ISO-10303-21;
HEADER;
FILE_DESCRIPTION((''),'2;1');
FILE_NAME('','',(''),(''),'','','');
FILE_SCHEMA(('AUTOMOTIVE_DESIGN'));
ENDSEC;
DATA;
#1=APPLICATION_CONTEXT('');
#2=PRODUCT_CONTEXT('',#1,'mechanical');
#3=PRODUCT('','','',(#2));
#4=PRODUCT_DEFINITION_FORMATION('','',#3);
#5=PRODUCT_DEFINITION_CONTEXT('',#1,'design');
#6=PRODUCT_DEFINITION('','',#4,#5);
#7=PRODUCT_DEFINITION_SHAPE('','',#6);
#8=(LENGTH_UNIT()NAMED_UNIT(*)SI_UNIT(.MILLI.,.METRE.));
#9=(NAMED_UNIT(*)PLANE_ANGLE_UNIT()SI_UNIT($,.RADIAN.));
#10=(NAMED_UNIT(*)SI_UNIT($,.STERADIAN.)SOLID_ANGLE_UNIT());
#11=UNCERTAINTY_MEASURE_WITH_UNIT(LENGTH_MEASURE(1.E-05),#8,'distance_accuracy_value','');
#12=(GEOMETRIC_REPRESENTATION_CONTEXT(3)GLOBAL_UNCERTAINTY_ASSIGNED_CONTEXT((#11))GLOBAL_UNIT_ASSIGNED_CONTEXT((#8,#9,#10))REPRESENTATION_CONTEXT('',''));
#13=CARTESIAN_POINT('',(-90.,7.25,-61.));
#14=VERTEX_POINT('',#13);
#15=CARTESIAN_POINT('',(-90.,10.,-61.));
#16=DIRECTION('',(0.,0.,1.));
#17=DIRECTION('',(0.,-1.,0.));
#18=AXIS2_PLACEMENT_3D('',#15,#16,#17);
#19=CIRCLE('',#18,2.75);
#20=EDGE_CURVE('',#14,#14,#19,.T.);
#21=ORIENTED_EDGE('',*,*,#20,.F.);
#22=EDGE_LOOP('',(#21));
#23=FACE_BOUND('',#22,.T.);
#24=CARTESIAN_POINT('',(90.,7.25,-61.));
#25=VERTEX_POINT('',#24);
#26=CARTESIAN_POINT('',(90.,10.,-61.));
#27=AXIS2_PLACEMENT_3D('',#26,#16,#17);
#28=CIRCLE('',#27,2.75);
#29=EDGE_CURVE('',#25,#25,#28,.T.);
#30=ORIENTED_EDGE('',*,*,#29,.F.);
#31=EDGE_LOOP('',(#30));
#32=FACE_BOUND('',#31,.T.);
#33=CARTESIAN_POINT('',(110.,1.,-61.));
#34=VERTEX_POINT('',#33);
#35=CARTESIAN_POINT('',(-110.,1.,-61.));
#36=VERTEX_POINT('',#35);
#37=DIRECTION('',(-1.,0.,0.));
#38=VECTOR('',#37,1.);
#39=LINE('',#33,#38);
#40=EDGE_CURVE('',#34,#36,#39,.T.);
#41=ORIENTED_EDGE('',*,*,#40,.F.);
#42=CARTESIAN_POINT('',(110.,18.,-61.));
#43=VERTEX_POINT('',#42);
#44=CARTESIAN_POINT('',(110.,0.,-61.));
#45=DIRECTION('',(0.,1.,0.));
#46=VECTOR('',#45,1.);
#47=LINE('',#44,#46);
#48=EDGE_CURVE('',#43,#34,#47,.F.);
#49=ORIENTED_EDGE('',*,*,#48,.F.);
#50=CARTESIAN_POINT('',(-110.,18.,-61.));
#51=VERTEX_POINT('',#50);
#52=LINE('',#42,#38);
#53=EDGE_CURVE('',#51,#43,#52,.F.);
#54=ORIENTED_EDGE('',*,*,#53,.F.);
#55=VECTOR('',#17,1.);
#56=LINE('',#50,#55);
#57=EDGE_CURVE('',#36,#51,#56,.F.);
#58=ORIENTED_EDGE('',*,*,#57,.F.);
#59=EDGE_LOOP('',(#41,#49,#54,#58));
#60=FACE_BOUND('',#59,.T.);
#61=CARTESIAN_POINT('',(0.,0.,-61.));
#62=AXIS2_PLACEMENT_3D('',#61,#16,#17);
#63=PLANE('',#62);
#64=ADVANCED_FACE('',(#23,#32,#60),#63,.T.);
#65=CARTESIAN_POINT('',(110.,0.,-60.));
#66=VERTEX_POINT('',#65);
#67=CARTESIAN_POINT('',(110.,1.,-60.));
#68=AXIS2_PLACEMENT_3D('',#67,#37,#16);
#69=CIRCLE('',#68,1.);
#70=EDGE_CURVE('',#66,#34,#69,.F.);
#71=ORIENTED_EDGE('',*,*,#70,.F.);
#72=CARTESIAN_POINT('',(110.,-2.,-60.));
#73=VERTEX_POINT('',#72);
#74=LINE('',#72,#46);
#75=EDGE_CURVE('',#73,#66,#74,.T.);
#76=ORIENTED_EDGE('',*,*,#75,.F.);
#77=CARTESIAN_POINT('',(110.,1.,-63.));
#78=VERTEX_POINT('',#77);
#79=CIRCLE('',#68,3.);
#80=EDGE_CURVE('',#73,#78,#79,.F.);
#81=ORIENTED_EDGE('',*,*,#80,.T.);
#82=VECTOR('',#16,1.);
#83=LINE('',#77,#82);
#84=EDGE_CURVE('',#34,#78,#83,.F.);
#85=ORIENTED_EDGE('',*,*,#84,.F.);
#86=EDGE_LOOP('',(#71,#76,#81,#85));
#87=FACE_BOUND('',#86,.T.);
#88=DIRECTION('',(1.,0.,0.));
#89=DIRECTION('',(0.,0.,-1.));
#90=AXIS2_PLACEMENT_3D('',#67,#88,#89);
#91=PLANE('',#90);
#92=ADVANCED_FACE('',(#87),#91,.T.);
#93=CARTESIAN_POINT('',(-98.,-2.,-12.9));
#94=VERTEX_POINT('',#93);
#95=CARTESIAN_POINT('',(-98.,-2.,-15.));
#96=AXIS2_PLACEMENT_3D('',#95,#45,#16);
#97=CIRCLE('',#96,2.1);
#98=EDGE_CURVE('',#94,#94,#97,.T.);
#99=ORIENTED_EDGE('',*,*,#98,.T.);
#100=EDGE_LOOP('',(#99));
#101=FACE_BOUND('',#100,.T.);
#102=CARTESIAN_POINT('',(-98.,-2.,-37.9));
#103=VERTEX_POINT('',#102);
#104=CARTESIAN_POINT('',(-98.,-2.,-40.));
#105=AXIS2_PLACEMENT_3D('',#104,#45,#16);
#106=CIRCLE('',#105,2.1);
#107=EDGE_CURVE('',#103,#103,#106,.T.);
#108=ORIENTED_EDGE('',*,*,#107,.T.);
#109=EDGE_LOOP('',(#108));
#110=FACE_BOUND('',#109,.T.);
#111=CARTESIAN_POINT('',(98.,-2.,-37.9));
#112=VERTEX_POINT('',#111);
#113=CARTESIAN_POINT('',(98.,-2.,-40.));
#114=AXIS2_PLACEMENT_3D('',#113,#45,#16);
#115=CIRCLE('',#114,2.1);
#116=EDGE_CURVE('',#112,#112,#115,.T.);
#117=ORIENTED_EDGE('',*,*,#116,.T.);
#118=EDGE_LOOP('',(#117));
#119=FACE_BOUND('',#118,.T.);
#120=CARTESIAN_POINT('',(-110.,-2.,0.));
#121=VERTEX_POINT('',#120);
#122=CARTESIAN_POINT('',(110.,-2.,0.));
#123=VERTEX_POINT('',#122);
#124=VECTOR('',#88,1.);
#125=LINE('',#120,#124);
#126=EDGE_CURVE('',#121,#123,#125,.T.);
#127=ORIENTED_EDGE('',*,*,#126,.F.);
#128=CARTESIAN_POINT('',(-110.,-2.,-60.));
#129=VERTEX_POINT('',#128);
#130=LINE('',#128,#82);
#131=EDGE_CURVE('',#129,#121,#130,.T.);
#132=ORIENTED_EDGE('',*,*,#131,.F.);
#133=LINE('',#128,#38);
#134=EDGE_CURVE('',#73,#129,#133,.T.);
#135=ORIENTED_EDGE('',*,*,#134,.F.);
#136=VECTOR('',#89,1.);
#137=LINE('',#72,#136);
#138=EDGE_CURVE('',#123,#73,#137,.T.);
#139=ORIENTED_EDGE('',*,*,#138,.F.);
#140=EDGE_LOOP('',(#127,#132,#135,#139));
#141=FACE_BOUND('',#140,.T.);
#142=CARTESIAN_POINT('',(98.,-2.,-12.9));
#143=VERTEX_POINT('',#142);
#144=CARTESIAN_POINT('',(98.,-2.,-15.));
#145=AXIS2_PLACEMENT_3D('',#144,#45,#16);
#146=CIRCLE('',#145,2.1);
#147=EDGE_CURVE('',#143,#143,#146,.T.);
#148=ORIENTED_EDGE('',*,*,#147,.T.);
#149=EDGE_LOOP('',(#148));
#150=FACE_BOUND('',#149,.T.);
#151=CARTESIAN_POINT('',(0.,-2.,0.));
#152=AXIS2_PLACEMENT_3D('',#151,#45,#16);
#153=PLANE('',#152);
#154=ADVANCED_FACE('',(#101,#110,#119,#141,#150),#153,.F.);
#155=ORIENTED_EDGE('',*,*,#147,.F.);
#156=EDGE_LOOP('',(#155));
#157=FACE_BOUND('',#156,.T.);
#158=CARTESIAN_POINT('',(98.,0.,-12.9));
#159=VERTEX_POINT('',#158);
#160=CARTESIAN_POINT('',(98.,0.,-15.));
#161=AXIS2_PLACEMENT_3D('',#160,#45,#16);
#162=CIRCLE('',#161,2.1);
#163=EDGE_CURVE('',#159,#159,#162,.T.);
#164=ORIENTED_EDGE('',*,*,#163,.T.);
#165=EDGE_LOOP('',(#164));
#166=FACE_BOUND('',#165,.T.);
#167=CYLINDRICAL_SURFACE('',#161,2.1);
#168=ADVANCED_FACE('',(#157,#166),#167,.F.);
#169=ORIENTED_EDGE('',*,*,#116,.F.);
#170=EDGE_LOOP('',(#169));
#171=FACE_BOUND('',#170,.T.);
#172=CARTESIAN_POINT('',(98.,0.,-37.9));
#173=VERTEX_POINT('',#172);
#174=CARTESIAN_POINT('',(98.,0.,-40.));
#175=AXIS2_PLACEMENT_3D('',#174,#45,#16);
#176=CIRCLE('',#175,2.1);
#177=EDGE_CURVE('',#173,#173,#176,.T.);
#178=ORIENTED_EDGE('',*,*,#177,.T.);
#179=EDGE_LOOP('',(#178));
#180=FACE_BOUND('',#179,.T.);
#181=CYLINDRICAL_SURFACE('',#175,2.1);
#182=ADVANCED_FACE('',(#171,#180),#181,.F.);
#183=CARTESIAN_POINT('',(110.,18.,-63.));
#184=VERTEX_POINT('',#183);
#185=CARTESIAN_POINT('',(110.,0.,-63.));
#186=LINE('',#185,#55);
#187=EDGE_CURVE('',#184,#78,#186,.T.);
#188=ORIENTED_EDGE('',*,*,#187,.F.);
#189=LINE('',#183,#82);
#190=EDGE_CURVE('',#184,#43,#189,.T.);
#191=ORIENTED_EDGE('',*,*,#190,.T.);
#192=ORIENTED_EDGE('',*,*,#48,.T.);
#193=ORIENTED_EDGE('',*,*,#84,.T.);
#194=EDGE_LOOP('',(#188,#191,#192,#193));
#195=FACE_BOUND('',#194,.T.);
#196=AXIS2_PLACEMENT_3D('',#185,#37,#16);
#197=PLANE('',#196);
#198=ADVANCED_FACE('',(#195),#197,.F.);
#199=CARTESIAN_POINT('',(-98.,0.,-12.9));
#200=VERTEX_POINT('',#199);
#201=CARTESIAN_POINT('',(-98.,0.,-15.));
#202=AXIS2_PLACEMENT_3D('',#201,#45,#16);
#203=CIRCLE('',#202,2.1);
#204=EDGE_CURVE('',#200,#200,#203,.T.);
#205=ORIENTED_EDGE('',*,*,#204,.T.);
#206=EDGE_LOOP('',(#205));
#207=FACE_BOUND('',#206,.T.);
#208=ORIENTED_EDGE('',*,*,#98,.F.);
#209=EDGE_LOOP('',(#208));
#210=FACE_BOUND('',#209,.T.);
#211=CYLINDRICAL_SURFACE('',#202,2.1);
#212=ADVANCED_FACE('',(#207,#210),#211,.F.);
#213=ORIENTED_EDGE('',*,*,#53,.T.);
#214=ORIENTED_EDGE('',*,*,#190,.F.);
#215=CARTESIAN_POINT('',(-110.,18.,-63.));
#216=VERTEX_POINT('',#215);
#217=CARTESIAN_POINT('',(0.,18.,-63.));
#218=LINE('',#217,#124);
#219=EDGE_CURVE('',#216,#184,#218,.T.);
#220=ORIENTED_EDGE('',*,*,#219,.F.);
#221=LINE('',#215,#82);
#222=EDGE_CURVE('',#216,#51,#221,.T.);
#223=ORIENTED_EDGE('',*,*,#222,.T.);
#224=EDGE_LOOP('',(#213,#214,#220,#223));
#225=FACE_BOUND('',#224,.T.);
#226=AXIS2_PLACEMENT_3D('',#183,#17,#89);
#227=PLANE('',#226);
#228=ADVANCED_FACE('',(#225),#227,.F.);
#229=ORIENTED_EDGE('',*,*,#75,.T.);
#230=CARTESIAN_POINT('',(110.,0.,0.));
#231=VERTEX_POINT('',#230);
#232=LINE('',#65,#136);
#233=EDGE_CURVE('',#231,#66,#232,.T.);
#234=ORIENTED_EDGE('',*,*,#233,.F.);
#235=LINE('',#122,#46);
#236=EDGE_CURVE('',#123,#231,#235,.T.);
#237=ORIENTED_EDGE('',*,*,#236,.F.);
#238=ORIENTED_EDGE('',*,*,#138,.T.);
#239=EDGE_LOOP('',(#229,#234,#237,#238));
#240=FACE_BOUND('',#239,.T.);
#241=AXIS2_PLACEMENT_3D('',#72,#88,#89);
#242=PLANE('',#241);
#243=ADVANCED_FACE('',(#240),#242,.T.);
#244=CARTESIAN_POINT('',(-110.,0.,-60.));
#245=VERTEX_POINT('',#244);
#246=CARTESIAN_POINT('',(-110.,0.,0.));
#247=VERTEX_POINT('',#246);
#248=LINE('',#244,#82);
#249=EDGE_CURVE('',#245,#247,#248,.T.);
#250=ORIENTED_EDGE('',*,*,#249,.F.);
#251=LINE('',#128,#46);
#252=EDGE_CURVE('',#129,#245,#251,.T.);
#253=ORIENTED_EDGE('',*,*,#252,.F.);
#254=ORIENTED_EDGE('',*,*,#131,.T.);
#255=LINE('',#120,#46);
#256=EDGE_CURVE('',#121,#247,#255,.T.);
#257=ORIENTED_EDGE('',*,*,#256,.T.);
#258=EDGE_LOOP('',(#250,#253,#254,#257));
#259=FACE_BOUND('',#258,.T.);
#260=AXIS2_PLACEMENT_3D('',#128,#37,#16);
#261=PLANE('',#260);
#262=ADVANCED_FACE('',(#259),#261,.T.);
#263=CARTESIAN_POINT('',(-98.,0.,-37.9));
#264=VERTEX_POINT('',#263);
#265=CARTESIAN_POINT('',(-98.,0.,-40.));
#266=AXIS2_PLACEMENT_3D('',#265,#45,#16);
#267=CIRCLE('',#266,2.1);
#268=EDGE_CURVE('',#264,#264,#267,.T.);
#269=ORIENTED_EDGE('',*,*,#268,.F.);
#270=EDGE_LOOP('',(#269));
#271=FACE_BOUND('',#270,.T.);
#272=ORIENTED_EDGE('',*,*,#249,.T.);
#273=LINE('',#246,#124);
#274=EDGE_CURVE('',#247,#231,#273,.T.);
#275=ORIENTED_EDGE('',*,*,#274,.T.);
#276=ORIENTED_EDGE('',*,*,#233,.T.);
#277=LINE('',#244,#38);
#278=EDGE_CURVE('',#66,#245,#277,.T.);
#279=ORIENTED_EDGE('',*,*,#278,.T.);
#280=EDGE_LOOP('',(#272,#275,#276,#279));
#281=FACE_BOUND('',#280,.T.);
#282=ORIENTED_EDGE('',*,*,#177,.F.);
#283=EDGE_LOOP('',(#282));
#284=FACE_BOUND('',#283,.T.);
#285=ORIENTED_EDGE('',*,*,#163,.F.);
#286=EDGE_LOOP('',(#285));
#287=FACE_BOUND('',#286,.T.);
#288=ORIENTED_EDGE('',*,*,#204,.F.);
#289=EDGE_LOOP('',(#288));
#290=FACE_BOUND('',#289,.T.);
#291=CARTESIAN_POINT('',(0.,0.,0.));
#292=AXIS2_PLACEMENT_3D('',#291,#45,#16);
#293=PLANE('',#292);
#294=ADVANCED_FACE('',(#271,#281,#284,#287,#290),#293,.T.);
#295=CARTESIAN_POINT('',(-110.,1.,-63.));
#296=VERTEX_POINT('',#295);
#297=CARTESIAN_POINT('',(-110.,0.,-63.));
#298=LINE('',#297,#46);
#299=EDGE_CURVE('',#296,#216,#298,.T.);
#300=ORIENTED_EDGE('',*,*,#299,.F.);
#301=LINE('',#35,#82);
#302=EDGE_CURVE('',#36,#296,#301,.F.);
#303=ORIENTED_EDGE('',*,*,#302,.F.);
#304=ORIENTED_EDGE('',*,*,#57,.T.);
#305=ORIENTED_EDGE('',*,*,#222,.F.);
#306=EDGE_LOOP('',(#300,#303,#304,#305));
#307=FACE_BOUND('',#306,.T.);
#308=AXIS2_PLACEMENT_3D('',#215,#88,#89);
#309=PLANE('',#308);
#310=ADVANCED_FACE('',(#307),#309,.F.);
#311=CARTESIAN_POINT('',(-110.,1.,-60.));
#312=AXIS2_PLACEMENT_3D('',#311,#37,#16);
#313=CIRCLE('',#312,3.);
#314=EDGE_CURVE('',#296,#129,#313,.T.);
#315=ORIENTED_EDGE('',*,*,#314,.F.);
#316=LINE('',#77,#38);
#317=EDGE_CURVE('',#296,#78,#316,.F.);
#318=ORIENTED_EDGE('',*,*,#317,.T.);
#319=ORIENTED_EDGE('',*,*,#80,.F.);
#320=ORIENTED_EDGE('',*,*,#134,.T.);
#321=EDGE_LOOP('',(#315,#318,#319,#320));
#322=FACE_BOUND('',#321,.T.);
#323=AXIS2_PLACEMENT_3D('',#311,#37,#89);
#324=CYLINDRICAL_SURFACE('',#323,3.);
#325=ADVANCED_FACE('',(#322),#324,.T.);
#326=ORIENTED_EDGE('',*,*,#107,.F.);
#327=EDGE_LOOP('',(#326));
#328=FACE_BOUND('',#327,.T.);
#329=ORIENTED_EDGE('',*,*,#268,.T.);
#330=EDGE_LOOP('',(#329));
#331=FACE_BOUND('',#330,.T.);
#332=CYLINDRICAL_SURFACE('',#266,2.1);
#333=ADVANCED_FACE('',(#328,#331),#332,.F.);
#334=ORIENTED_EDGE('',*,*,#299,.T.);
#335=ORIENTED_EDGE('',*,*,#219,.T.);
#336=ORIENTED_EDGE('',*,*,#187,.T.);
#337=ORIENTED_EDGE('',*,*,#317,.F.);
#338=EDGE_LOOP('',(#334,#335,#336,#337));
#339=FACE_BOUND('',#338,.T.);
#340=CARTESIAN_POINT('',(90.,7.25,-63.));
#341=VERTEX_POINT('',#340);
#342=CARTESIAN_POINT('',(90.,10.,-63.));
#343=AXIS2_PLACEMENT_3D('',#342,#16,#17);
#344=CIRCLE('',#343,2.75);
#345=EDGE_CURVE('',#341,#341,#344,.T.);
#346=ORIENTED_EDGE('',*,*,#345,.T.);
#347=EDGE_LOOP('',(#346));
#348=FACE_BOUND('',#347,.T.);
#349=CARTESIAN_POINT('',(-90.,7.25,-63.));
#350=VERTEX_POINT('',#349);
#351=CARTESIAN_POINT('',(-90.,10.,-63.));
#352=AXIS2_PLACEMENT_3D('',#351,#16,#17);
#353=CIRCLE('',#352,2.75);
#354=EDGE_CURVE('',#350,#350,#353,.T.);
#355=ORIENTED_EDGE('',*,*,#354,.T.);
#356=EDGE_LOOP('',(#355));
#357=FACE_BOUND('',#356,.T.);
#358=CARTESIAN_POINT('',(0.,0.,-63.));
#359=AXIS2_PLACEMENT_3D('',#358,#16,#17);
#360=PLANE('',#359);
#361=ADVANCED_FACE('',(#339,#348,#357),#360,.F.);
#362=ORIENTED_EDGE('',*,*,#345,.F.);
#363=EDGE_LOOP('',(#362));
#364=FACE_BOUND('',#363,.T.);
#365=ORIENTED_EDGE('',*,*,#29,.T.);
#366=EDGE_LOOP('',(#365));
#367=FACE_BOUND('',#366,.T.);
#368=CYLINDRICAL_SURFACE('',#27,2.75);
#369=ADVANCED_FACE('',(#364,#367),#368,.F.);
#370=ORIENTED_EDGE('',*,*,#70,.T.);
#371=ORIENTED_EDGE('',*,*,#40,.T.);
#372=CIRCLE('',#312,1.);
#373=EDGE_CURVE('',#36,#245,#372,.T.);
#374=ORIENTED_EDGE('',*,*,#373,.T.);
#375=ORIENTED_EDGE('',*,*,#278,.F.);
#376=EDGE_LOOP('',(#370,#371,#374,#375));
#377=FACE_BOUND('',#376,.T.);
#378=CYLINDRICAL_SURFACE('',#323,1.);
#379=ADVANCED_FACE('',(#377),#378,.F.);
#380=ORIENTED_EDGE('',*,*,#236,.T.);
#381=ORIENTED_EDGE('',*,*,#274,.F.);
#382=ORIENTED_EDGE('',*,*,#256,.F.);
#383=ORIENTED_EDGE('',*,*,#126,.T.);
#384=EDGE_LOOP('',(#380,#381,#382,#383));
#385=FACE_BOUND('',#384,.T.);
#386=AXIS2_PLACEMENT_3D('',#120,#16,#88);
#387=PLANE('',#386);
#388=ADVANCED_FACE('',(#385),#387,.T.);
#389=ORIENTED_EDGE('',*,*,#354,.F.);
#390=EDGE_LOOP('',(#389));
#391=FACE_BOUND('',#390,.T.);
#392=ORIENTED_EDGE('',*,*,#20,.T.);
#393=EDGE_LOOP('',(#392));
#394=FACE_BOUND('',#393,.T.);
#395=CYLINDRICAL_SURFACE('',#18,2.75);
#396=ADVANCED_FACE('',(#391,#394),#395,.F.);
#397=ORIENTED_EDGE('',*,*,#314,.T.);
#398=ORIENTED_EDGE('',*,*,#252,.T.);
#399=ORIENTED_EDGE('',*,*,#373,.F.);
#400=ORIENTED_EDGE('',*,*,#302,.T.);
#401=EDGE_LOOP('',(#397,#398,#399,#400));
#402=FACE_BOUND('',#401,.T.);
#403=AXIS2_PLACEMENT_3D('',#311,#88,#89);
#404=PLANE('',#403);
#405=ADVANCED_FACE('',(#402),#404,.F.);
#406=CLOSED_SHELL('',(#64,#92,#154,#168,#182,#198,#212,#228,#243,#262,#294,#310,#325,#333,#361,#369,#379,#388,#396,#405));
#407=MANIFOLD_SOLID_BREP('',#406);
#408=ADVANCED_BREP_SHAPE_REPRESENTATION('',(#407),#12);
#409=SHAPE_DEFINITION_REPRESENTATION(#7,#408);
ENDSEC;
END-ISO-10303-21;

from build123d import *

# Parameters (mm, degrees)
SKETCH_1_W             = 220
SKETCH_1_H             = 60
SM_BASE_FLANGE_1_DEPTH = 2
SM_EDGE_FLANGE_1_DEPTH = 220
MM_1_D                 = 5.5
MM_1_DEPTH             = 8
MM_1_TIP               = 1.652366702
HOLE_WIZARD_M5_1_D     = 4.2
HOLE_WIZARD_M5_1_DEPTH = 12.4
HOLE_WIZARD_M5_1_TIP   = 1.2618073


# Sheet-metal steps are written as plain solids
with BuildPart() as part:
    # Sketch 1 → 基体-法兰1 (new body)
    with BuildSketch(Plane(origin=(0, 0, 0), x_dir=(1, 0, 0), z_dir=(0, 1, 0))):
        with Locations((0, 30)):
            Rectangle(SKETCH_1_W, SKETCH_1_H)
    extrude(amount=-SM_BASE_FLANGE_1_DEPTH)

    # 边线-法兰1 section (across the edge) → 边线-法兰1 (add)
    with BuildSketch(Plane(origin=(110, 0, -61), x_dir=(0, 0, 1), z_dir=(-1, 0, 0))):
        with BuildLine():
            Line((-2, 1), (-2, 18))
            Line((-2, 18), (0, 18))
            Line((0, 18), (0, 1))
            ThreePointArc((0, 1), (0.292893219, 0.292893219), (1, 0))
            Line((1, 0), (1, -2))
            ThreePointArc((1, -2), (-1.121320344, -1.121320344), (-2, 1))
        make_face()
    extrude(amount=SM_EDGE_FLANGE_1_DEPTH)

    # 大小mm 暗销孔1
    with Locations(Plane(origin=(90, 10, -61), x_dir=(0, 1, 0), z_dir=(0, 0, 1))):
        with Locations((0, 0), (0, 180)):
            Hole(MM_1_D / 2, depth=MM_1_DEPTH)
            with Locations((0, 0, -(MM_1_DEPTH + MM_1_TIP / 2))):  # 118° drill point
                Cone(0, MM_1_D / 2, MM_1_TIP, mode=Mode.SUBTRACT)

    # M5 螺纹孔1
    with Locations(Plane(origin=(98, 0, -40), x_dir=(0, 0, 1), z_dir=(0, 1, 0))):
        with Locations((0, 0), (25, 0), (0, -196), (25, -196)):
            Hole(HOLE_WIZARD_M5_1_D / 2, depth=HOLE_WIZARD_M5_1_DEPTH)
            with Locations((0, 0, -(HOLE_WIZARD_M5_1_DEPTH + HOLE_WIZARD_M5_1_TIP / 2))):  # 118° drill point
                Cone(0, HOLE_WIZARD_M5_1_D / 2, HOLE_WIZARD_M5_1_TIP, mode=Mode.SUBTRACT)


solid = part.part
